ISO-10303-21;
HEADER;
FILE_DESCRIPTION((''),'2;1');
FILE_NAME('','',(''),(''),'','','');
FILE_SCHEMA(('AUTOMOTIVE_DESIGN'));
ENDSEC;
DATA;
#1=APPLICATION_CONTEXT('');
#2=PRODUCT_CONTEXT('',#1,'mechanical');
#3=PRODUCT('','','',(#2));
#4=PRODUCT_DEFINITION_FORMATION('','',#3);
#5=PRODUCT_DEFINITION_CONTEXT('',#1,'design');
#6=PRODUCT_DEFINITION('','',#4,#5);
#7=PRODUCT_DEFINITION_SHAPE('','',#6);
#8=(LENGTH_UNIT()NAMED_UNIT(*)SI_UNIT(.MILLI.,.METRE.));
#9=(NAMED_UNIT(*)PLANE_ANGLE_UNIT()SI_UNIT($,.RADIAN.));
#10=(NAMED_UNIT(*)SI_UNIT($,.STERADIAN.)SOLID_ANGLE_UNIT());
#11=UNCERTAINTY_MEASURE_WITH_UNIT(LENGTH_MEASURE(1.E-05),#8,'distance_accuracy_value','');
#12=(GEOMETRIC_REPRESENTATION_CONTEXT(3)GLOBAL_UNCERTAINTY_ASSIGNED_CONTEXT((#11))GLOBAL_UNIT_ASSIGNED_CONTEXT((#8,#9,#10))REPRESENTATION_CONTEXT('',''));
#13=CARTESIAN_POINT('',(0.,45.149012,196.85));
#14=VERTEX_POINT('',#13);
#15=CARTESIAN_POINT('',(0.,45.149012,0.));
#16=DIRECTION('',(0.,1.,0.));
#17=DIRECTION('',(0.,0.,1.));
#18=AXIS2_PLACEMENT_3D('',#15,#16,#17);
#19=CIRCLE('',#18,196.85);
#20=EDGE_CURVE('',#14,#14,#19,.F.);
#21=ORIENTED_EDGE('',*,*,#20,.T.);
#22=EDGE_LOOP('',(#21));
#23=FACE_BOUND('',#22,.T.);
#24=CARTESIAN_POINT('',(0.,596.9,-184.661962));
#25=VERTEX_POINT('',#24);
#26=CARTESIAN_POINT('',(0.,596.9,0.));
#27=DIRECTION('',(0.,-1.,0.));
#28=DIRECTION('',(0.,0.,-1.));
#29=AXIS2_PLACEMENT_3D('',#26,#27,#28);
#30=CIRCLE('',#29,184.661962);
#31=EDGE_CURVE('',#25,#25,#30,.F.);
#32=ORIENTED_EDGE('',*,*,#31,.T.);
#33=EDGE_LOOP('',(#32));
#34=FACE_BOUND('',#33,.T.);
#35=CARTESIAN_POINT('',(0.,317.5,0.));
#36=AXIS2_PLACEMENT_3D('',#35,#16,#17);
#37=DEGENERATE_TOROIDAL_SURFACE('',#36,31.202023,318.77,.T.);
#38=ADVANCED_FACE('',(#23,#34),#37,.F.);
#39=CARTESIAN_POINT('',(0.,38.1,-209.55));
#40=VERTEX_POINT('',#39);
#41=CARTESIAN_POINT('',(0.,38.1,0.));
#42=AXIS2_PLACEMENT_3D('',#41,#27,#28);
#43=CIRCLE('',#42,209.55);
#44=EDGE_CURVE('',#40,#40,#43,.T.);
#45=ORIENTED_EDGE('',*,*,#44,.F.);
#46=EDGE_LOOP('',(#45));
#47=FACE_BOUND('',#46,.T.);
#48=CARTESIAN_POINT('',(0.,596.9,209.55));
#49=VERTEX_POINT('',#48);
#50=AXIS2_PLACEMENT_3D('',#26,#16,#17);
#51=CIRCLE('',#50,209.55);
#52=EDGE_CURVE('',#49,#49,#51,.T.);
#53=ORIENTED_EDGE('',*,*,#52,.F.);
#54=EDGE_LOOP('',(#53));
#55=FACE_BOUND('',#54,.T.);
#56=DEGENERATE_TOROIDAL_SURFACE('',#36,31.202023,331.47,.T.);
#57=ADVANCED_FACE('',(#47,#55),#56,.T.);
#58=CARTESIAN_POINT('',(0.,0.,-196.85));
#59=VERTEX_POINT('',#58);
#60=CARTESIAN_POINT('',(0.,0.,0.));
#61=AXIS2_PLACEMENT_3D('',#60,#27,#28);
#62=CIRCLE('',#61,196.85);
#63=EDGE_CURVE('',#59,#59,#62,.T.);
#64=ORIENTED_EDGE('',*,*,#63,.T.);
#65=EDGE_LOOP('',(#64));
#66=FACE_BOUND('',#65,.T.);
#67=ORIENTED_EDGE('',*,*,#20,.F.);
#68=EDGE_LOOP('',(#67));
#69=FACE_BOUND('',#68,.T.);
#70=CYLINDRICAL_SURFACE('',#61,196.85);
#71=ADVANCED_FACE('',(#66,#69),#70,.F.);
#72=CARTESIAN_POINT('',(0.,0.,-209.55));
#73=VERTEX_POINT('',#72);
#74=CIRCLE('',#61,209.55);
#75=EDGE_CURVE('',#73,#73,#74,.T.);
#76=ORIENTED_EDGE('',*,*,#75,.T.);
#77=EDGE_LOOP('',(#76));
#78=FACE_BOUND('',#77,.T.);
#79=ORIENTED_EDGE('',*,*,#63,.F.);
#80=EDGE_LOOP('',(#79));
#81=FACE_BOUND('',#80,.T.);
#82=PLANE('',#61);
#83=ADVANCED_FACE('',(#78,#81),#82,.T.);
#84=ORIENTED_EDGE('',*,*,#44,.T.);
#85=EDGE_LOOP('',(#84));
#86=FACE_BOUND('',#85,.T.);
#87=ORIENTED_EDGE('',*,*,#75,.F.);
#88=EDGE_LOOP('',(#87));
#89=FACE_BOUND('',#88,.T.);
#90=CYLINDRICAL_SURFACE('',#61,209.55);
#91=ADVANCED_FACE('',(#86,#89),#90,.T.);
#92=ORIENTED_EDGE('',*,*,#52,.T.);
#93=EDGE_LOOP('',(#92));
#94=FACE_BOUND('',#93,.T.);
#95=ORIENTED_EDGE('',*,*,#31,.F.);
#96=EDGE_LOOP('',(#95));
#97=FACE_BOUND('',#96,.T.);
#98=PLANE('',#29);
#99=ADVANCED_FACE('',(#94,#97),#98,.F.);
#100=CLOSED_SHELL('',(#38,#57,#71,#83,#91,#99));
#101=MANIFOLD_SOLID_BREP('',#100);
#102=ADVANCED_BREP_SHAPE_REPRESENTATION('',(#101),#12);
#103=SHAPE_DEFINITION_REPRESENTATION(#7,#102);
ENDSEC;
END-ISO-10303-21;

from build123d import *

# Parameters (mm, degrees)
SKETCH2_8_W        = 209.55
SKETCH2_8_H        = 38.1
SKETCH3_R          = 196.85
CUT_EXTRUDE1_DEPTH = 340.106


# Read off the part's stored shape, not the designer's step: Shell6
with BuildPart() as part:
    # Sketch2 → Revolve5 (revolve)
    with BuildSketch(Plane.XY, mode=Mode.PRIVATE) as revolve5_sk:
        with BuildLine():
            Line((209.55, 38.1), (0, 38.1))
            Line((0, 38.1), (0, 596.9))
            Line((0, 596.9), (209.55, 596.9))
            ThreePointArc((209.55, 596.9), (362.672023, 317.5), (209.55, 38.1))
        make_face()
    revolve(revolve5_sk.sketch.rotate(Axis((0, 0, 0), (0, -1, 0)), 90), axis=Axis((0, 0, 0), (0, -1, 0)))

    # Sketch2<8> → Revolve6 (revolve)
    with BuildSketch(Plane.XY, mode=Mode.PRIVATE) as revolve6_sk:
        with Locations((104.775, 19.05)):
            Rectangle(SKETCH2_8_W, SKETCH2_8_H)
    revolve(revolve6_sk.sketch.rotate(Axis((0, 0, 0), (0, -1, 0)), 90), axis=Axis((0, 0, 0), (0, -1, 0)))

    # Shell6 outline → Shell6 (revolve, cut)
    with BuildSketch(Plane.XY):
        with BuildLine():
            Line((184.661962072, 596.9), (0, 596.9))
            Line((0, 596.9), (0, 12.7))
            Line((0, 12.7), (196.85, 12.7))
            Line((196.85, 12.7), (196.85, 45.14901209))
            ThreePointArc((196.85, 45.14901209), (349.89427846, 324.539830253), (184.661962072, 596.9))
        make_face()
    revolve(axis=Axis((0, 0, 0), (0, 1, 0)), mode=Mode.SUBTRACT)

    # Sketch3 → Cut-Extrude1 (cut)
    with BuildSketch(Plane(origin=(0, 12.7, 0), x_dir=(1, 0, 0), z_dir=(0, 1, 0))):
        with Locations(Location((0, 0, 0), (0, 0, 90))):
            Circle(SKETCH3_R)
    extrude(amount=-CUT_EXTRUDE1_DEPTH, mode=Mode.SUBTRACT)


solid = part.part
